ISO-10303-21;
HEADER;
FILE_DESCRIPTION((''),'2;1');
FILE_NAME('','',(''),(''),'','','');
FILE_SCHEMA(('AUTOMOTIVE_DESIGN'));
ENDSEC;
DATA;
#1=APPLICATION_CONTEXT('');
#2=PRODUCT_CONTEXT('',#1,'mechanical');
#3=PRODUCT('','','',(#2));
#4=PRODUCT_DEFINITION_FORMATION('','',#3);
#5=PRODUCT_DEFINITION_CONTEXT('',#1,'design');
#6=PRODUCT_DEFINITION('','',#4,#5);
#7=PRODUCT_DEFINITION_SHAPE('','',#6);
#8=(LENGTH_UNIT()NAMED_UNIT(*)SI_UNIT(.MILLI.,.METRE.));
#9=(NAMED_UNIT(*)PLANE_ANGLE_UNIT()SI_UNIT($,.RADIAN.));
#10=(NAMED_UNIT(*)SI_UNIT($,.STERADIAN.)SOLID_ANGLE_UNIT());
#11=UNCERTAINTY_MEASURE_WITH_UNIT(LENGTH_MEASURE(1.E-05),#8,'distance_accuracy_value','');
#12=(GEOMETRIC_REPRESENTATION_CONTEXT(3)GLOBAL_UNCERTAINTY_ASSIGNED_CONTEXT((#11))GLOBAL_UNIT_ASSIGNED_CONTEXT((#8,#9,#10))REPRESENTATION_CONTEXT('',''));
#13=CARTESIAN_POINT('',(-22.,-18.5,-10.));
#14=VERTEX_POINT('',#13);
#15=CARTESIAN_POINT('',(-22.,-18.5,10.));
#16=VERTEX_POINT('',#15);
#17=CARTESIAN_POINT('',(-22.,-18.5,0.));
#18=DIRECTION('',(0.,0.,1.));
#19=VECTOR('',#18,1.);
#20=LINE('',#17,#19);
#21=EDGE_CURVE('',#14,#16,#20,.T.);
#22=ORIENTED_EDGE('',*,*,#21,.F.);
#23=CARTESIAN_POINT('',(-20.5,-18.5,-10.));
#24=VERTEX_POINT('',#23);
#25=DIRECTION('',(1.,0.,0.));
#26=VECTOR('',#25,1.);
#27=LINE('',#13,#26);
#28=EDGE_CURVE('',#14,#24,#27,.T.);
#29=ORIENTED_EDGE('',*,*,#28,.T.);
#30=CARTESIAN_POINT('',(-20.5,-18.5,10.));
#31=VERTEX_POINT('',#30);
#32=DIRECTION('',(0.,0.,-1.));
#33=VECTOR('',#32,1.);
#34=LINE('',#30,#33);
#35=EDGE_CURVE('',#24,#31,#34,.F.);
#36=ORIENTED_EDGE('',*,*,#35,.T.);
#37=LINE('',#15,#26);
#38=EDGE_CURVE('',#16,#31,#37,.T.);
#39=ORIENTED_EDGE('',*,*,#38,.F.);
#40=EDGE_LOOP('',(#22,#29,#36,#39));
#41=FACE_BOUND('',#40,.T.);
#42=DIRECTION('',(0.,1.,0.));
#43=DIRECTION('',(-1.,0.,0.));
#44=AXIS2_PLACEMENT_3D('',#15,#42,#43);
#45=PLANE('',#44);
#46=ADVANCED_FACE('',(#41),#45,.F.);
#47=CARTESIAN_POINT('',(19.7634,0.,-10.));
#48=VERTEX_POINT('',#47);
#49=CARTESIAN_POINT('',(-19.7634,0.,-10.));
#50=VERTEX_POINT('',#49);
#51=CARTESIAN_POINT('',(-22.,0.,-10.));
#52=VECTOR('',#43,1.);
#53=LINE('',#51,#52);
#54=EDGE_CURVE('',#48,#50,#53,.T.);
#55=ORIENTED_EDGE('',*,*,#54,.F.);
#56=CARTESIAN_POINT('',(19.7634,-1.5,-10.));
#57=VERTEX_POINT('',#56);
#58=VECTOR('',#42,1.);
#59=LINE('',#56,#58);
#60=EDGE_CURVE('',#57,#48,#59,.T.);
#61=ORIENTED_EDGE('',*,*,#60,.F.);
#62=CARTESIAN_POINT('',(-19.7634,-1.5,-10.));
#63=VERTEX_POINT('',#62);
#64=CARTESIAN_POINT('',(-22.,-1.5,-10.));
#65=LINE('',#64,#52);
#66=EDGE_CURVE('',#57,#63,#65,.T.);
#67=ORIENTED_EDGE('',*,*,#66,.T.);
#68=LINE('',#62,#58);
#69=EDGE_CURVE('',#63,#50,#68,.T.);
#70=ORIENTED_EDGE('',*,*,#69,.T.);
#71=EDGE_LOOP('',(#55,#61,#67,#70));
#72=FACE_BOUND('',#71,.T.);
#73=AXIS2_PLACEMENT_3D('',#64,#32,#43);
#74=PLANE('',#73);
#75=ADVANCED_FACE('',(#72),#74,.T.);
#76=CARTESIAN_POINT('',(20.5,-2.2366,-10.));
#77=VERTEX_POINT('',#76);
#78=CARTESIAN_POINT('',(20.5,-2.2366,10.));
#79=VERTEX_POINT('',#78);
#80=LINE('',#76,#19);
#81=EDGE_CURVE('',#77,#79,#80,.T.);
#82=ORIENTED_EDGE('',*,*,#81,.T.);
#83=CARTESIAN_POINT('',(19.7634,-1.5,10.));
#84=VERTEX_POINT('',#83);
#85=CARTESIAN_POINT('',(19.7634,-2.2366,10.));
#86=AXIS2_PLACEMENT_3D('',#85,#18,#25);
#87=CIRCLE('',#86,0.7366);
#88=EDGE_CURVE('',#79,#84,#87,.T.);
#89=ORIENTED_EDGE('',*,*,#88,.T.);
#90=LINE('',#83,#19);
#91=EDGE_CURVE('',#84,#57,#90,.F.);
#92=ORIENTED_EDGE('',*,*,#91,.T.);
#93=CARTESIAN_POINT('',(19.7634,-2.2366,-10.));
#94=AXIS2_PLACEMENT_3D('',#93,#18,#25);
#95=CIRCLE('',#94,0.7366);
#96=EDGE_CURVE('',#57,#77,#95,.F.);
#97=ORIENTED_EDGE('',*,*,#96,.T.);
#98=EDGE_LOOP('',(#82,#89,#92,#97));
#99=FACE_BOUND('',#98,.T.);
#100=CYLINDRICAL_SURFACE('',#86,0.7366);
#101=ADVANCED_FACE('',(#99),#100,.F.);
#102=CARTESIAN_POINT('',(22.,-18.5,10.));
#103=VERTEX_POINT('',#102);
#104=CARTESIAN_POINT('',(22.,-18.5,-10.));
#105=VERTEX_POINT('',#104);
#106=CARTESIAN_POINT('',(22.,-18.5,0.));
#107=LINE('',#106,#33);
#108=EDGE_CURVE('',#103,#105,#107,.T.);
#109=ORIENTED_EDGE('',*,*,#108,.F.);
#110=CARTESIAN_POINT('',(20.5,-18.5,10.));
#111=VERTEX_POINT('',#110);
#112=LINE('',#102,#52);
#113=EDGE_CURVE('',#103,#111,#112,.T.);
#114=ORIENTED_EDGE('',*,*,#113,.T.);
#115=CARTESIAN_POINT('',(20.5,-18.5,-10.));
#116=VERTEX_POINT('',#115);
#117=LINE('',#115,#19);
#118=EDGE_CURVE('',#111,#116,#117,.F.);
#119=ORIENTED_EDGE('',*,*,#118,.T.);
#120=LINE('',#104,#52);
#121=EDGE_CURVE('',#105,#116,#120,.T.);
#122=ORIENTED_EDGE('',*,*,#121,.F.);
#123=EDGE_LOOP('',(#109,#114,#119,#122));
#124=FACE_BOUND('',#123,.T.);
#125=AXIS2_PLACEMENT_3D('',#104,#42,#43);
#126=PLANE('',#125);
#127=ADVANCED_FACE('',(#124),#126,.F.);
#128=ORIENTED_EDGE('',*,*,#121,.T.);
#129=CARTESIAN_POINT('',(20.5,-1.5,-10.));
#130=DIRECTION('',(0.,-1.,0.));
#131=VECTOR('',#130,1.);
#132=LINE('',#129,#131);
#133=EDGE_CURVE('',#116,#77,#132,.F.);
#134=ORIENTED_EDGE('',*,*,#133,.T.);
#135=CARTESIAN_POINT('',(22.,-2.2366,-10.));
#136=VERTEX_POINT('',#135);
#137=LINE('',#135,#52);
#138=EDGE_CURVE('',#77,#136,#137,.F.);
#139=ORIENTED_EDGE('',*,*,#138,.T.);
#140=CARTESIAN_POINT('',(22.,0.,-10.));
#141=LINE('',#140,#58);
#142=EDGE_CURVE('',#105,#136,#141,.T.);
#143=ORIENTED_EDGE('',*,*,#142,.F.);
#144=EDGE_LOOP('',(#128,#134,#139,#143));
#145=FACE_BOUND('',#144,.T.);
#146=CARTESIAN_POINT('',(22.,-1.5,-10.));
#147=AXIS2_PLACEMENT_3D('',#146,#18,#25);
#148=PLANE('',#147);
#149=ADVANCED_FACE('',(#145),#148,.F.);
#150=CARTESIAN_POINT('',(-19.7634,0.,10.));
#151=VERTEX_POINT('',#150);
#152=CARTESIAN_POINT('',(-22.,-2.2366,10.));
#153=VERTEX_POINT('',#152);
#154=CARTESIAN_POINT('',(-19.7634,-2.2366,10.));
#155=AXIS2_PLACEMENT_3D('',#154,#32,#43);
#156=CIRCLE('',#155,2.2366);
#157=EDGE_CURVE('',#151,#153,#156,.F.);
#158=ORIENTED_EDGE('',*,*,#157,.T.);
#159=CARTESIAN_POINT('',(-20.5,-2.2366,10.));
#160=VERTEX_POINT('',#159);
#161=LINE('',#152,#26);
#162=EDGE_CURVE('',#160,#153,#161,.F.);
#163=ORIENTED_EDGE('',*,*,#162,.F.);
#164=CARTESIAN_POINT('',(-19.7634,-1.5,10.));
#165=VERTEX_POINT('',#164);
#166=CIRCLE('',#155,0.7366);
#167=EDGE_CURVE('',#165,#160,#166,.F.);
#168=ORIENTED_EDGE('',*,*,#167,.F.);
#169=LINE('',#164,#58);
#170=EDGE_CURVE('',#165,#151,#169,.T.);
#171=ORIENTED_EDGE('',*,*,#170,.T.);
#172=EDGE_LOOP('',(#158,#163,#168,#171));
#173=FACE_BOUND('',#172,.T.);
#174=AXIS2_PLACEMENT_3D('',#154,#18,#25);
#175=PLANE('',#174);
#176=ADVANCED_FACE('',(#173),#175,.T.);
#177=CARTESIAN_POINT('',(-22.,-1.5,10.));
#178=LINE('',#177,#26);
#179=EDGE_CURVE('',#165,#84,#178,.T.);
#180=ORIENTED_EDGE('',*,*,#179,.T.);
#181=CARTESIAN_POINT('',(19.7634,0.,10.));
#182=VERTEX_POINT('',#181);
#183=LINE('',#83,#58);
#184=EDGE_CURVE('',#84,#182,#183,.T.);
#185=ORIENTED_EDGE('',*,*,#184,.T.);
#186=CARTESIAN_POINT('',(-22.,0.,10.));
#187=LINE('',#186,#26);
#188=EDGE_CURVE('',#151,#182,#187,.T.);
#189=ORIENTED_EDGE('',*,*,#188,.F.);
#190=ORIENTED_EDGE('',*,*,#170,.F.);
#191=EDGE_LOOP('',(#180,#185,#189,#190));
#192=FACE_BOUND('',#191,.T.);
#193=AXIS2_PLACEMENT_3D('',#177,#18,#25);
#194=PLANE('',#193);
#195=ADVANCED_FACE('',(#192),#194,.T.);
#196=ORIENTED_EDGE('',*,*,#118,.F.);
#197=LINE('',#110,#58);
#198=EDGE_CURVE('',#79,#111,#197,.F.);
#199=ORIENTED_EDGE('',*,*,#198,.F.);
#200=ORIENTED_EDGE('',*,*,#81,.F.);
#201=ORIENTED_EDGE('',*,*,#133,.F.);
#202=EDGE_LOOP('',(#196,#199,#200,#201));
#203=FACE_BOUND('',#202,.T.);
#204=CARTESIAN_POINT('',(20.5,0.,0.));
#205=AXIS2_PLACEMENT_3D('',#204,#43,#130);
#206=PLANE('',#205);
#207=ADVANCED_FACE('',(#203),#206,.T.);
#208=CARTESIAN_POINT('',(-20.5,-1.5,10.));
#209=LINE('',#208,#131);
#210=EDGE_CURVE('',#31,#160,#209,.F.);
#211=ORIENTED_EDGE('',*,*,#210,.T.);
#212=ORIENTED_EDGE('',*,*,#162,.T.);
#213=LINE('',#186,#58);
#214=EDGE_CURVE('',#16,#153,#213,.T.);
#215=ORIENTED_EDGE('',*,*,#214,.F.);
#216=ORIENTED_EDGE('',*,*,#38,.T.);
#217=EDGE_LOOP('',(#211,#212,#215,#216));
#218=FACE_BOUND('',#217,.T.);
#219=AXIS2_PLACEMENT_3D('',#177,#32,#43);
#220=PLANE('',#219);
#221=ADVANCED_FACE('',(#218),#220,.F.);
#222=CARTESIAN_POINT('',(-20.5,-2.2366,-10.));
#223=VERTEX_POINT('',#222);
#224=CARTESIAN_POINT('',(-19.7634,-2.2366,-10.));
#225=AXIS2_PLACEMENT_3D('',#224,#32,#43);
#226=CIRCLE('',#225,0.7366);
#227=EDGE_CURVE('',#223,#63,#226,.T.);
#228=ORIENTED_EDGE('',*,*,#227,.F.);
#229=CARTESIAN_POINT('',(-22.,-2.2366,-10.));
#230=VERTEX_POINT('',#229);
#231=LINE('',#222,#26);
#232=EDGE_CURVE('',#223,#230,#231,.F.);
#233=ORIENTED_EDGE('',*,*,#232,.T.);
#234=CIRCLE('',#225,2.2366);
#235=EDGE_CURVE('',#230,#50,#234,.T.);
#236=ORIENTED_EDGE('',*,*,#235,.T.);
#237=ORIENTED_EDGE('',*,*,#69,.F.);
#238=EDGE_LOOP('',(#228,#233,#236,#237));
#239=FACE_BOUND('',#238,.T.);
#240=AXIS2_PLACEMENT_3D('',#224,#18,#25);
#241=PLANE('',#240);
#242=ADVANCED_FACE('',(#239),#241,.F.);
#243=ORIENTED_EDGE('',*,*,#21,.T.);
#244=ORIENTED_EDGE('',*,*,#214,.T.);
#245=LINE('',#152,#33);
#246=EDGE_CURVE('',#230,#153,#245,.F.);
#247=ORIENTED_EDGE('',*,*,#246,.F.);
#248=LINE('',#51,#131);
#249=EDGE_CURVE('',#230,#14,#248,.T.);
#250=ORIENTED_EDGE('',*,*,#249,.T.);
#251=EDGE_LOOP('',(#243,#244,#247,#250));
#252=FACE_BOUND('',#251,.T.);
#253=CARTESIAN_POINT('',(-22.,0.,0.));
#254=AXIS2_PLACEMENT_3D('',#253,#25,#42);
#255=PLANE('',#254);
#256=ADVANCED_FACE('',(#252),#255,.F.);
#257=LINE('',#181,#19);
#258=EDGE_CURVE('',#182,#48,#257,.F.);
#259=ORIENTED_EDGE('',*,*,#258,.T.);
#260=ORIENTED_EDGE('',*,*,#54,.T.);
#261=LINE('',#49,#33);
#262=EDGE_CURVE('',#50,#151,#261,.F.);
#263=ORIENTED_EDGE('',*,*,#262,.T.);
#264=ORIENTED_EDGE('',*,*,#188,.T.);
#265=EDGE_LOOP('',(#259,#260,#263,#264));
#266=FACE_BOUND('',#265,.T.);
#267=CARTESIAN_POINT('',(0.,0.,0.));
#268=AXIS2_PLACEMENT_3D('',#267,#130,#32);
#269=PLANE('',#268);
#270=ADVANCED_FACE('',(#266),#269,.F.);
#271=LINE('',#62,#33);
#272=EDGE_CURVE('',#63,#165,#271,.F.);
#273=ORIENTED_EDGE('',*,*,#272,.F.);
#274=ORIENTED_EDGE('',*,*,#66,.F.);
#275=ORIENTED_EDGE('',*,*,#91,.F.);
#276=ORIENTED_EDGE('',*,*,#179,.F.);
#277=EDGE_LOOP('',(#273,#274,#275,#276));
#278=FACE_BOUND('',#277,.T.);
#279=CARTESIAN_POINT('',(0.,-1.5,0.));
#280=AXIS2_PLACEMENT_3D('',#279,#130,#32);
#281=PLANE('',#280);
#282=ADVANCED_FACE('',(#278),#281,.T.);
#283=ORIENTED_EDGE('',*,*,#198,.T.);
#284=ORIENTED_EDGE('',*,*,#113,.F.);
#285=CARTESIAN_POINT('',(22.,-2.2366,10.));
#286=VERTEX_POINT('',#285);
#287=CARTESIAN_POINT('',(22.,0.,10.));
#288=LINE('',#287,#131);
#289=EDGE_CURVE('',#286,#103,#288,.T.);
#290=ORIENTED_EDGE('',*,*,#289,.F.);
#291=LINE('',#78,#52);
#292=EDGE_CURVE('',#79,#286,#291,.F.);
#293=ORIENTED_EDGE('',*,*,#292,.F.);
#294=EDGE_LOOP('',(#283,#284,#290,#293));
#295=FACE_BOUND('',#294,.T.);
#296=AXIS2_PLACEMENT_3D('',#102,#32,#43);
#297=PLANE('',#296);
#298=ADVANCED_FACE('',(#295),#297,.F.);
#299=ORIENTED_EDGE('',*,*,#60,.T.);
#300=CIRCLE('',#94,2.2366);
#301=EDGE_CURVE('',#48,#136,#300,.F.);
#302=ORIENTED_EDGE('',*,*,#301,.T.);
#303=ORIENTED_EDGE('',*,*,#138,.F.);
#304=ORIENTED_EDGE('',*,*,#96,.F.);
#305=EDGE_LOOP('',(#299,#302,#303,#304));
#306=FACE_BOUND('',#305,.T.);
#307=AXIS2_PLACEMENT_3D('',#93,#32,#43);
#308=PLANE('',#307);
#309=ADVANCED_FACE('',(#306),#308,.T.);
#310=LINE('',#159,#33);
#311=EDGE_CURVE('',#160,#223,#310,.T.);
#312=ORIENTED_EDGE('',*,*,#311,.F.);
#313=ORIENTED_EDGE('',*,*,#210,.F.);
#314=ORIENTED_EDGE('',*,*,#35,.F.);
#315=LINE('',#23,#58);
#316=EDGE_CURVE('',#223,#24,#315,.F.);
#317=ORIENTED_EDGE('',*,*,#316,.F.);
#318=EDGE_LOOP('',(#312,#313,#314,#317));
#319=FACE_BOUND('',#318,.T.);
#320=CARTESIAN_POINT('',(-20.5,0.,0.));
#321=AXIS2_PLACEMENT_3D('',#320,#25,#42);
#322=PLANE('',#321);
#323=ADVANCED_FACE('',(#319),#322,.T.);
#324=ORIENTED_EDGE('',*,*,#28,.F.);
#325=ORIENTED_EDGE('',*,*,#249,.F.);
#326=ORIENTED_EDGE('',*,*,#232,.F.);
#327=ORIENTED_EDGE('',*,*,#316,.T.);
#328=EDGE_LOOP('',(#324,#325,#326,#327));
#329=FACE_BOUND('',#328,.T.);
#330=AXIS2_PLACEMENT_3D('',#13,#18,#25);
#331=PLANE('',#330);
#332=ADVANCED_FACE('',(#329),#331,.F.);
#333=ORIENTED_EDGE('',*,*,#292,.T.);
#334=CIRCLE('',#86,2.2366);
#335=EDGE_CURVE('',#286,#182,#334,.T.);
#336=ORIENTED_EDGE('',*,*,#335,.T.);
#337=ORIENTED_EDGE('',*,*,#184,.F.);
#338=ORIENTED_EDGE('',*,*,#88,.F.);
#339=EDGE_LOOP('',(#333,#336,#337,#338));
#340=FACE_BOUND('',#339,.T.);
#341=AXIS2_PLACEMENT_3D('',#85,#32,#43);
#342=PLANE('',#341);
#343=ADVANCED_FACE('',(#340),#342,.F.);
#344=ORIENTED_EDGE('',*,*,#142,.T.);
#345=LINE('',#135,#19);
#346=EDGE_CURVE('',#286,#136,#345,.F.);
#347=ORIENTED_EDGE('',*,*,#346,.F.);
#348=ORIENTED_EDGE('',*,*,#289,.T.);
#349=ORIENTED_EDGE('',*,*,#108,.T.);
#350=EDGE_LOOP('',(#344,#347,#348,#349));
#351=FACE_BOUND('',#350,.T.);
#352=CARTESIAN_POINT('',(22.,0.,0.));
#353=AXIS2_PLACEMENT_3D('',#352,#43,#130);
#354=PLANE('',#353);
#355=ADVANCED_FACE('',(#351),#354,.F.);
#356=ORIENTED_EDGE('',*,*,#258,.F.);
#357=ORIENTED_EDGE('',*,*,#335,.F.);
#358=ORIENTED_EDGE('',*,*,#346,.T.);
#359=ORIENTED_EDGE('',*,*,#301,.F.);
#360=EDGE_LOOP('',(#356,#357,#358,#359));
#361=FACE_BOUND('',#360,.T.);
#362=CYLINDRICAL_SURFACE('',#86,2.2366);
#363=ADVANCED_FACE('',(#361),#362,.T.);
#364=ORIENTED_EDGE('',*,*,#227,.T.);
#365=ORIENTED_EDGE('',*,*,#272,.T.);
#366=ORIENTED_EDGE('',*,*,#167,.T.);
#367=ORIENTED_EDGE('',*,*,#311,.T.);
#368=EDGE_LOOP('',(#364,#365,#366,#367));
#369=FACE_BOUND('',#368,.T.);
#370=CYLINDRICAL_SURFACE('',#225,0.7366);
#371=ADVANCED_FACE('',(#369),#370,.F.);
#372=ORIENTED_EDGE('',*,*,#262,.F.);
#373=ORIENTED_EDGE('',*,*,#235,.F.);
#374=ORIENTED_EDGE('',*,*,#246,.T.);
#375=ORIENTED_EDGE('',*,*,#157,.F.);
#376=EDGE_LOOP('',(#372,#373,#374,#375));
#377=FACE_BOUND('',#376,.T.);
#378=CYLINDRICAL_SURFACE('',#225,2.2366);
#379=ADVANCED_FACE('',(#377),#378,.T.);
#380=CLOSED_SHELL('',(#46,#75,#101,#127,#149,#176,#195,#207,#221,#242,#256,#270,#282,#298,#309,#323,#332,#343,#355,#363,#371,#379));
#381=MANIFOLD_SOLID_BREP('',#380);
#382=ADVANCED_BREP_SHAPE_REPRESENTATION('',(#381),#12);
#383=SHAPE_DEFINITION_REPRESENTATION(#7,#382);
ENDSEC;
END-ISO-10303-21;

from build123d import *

# Parameters (mm, degrees)
CROQUIS2_W                         = 44
CROQUIS2_H                         = 20
BRIDA_BASE1_DEPTH                  = 1.5
BRIDA_DE_ARISTA1_STRIP_W           = 7.4732
BRIDA_DE_ARISTA1_STRIP_H           = 1.5
BRIDA_DE_ARISTA1_STRIP_CUT_DEPTH   = 20
BRIDA_DE_ARISTA1_STRIP_2_W         = 7.4732
BRIDA_DE_ARISTA1_STRIP_2_H         = 1.5
BRIDA_DE_ARISTA1_STRIP_CUT_2_DEPTH = 20
BRIDA_DE_ARISTA1_DEPTH             = 20
BRIDA_DE_ARISTA1_BEND_DEPTH        = 20


# Sheet-metal steps are written as plain solids
with BuildPart() as part:
    # Croquis2 → Brida base1 (new body)
    with BuildSketch(Plane(origin=(0, 0, 0), x_dir=(1, 0, 0), z_dir=(0, 1, 0))):
        Rectangle(CROQUIS2_W, CROQUIS2_H)
    extrude(amount=-BRIDA_BASE1_DEPTH)

    # Brida de arista1 strip (across the edge) → Brida de arista1 strip cut (cut)
    with BuildSketch(Plane(origin=(-22, -1.5, 10), x_dir=(1, 0, 0), z_dir=(0, 0, -1))):
        with Locations((-1.5, -0.75)):
            Rectangle(BRIDA_DE_ARISTA1_STRIP_W, BRIDA_DE_ARISTA1_STRIP_H)
    extrude(amount=BRIDA_DE_ARISTA1_STRIP_CUT_DEPTH, mode=Mode.SUBTRACT)

    # Brida de arista1 strip 2 (across the edge) → Brida de arista1 strip cut 2 (cut)
    with BuildSketch(Plane(origin=(22, -1.5, -10), x_dir=(-1, 0, 0), z_dir=(0, 0, 1))):
        with Locations((-1.5, -0.75)):
            Rectangle(BRIDA_DE_ARISTA1_STRIP_2_W, BRIDA_DE_ARISTA1_STRIP_2_H)
    extrude(amount=BRIDA_DE_ARISTA1_STRIP_CUT_2_DEPTH, mode=Mode.SUBTRACT)

    # Brida de arista1 section (across the edge) → Brida de arista1 (add)
    with BuildSketch(Plane(origin=(-22, -1.5, 10), x_dir=(1, 0, 0), z_dir=(0, 0, -1))):
        with BuildLine():
            Line((0, 0.7366), (0, 17))
            Line((0, 17), (1.5, 17))
            Line((1.5, 17), (1.5, 0.7366))
            ThreePointArc((1.5, 0.7366), (1.715745145, 0.215745145), (2.2366, 0))
            Line((2.2366, 0), (2.2366, -1.5))
            ThreePointArc((2.2366, -1.5), (0.655084973, -0.844915027), (0, 0.7366))
        make_face()
    extrude(amount=BRIDA_DE_ARISTA1_DEPTH)

    # Brida de arista1 section 2 (across the edge) → Brida de arista1 bend (add)
    with BuildSketch(Plane(origin=(22, -1.5, -10), x_dir=(-1, 0, 0), z_dir=(0, 0, 1))):
        with BuildLine():
            Line((0, 0.7366), (0, 17))
            Line((0, 17), (1.5, 17))
            Line((1.5, 17), (1.5, 0.7366))
            ThreePointArc((1.5, 0.7366), (1.715745145, 0.215745145), (2.2366, 0))
            Line((2.2366, 0), (2.2366, -1.5))
            ThreePointArc((2.2366, -1.5), (0.655084973, -0.844915027), (0, 0.7366))
        make_face()
    extrude(amount=BRIDA_DE_ARISTA1_BEND_DEPTH)


solid = part.part
